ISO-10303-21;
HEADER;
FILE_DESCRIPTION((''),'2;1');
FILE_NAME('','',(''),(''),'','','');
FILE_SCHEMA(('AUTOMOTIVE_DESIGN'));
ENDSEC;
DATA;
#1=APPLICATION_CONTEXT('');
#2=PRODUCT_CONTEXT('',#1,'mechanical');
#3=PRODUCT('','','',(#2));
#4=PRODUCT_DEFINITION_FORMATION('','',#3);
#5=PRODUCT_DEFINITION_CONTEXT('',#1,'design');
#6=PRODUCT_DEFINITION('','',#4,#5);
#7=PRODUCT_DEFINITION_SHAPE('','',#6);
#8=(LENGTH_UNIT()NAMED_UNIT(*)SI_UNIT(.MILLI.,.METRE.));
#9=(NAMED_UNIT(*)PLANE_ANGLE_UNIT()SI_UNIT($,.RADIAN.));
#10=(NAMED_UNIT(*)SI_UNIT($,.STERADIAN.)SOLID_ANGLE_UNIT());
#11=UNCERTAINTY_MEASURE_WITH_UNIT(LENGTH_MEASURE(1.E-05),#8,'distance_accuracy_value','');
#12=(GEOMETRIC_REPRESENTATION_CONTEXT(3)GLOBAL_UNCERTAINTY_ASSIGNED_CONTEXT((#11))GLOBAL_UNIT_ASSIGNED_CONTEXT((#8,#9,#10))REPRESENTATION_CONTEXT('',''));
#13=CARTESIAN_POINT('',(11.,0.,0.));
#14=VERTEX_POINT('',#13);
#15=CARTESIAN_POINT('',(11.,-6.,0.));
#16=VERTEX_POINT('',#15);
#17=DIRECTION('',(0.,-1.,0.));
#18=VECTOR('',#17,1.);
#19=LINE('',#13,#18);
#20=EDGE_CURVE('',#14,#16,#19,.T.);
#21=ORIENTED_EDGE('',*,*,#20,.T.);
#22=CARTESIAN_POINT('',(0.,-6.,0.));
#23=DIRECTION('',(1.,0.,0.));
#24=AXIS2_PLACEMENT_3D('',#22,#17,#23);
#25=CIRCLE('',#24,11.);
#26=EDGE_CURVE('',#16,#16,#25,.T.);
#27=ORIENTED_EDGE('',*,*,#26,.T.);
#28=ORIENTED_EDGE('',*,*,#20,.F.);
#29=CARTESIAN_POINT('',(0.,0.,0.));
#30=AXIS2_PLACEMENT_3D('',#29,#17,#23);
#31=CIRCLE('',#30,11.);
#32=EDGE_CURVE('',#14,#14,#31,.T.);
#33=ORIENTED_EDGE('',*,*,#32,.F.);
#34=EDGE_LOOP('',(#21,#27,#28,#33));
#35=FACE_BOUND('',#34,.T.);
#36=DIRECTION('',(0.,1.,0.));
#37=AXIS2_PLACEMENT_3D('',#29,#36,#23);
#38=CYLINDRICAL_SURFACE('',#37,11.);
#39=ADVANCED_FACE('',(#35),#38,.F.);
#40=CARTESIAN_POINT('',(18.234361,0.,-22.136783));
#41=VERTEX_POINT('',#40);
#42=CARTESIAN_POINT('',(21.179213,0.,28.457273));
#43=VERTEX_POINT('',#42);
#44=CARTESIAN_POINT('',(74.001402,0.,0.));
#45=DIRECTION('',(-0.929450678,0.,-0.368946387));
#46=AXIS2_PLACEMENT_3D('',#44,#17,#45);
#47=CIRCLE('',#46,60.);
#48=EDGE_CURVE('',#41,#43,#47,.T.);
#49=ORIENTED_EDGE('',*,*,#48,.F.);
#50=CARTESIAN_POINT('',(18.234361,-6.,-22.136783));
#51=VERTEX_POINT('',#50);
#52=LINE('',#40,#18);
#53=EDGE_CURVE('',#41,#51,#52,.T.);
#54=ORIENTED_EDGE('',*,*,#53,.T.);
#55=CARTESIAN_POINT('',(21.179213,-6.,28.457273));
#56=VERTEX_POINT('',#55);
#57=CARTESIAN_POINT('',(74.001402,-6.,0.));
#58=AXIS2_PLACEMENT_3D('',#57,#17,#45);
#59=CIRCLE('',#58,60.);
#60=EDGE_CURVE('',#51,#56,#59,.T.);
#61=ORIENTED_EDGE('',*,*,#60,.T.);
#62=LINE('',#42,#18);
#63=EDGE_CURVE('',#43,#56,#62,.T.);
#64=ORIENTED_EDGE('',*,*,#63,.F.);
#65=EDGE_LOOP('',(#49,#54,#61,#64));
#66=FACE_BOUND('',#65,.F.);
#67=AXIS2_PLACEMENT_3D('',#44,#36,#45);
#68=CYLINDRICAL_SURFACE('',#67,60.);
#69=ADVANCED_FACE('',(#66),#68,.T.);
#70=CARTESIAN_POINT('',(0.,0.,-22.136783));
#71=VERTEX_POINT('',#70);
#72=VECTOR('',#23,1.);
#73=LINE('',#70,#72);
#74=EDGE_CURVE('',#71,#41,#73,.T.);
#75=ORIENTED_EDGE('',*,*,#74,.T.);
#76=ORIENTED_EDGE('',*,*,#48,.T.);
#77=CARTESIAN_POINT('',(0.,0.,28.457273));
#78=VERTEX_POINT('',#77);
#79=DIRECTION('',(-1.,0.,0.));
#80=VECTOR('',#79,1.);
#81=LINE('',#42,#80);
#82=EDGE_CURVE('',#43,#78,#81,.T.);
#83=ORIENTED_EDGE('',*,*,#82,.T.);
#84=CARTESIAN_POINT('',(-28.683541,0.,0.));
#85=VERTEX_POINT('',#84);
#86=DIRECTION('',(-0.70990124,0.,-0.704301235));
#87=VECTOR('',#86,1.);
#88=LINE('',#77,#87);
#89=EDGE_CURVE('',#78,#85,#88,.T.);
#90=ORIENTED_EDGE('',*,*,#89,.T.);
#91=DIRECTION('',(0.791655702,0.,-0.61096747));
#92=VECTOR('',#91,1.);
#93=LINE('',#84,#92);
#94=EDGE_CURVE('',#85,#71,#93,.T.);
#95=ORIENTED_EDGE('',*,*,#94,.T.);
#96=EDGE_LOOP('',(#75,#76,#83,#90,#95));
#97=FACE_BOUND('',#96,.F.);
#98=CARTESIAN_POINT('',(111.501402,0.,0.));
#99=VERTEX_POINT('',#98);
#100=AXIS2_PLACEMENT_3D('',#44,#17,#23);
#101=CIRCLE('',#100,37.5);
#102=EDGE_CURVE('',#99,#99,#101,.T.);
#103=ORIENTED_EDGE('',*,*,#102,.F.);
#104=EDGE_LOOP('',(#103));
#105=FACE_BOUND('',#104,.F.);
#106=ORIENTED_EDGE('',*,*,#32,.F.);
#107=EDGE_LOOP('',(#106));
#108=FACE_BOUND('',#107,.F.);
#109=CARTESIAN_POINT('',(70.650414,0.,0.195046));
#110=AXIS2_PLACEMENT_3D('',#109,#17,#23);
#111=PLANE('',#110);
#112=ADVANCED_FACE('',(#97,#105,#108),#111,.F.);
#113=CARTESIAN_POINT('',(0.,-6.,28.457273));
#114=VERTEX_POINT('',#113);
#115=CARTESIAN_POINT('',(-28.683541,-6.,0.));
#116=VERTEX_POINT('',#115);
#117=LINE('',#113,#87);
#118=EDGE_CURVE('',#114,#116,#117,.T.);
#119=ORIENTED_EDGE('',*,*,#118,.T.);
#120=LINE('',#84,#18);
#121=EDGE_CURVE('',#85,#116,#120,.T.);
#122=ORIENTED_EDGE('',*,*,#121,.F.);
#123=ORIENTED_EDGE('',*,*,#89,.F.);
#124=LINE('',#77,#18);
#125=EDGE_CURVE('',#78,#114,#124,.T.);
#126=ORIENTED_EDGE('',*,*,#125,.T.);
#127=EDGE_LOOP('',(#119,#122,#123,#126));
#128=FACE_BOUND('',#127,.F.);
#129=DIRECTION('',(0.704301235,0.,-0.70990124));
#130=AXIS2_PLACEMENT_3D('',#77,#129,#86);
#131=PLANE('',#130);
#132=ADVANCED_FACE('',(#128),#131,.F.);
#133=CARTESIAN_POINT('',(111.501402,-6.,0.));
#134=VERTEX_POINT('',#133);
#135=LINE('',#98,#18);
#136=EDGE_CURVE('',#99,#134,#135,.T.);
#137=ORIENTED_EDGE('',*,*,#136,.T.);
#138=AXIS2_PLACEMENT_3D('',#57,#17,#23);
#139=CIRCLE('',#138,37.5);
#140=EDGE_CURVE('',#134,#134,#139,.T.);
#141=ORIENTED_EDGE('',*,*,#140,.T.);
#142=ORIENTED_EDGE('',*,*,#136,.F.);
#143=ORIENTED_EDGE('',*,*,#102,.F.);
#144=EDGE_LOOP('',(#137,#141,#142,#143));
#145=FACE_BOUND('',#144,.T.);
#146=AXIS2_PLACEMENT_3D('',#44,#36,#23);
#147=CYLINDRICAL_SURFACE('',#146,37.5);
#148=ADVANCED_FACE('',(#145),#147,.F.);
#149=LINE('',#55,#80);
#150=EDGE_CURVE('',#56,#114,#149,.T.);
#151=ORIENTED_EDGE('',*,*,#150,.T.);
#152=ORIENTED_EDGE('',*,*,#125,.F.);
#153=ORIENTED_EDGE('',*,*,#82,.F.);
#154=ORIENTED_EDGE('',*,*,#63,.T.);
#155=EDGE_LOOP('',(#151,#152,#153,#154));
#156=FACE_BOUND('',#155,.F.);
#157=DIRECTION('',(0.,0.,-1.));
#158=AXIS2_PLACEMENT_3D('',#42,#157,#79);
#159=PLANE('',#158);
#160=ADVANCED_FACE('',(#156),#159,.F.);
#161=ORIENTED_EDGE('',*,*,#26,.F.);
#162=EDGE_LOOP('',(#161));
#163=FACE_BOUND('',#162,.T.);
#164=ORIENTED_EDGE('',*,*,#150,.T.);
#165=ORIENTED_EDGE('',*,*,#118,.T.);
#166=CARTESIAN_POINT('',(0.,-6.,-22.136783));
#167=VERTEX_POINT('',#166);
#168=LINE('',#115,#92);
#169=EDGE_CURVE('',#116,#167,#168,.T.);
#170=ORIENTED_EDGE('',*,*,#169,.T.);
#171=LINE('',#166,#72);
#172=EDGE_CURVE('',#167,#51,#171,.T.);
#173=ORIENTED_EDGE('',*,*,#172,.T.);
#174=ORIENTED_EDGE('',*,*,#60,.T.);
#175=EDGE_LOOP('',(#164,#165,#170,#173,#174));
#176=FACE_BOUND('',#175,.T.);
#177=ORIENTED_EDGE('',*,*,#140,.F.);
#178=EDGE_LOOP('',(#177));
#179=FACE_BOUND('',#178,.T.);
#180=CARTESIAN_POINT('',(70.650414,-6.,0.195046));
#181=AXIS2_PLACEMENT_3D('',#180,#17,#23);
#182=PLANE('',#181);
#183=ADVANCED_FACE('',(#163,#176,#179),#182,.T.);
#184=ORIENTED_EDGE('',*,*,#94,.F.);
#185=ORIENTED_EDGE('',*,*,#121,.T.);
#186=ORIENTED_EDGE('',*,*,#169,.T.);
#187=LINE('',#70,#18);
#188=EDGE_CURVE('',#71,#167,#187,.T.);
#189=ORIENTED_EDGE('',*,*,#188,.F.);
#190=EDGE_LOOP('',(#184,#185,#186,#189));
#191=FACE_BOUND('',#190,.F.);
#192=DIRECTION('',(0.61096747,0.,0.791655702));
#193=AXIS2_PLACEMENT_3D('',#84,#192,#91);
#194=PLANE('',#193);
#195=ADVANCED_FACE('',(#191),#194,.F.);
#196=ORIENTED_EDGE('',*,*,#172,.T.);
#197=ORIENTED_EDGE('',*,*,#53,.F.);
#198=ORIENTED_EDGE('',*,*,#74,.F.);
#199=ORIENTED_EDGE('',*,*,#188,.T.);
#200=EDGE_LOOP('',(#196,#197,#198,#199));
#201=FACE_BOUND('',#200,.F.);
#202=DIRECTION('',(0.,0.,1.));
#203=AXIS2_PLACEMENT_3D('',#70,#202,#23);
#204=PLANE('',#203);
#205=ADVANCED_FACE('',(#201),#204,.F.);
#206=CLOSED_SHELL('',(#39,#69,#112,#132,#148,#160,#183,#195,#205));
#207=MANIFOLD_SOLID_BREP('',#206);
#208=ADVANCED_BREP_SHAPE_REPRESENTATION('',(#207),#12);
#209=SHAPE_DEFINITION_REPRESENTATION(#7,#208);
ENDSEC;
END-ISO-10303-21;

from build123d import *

# Parameters (mm, degrees)
F0_R     = 37.5
F0_R_2   = 11
F1_DEPTH = 6


# Not quite as in the source:
# - a feature names something its author has since deleted; it is built from what else it names


with BuildPart() as f1:
    # F0 (on Front) → F1 (new body)
    with BuildSketch(Plane.XZ):
        with BuildLine():
            ThreePointArc((18.2343609636, -22.1367832273), (85.2703314711, -58.932259595), (134.0014016628, 0))
            ThreePointArc((134.0014016628, 0), (88.6756766088, 58.1778794286), (21.1792131691, 28.4572732836))
            ThreePointArc((21.1792131691, 28.4572732836), (14.1027805373, 3.4864290135), (18.2343609636, -22.1367832273))
        make_face()
        with Locations((74.0014016628, 0)):
            Circle(F0_R, mode=Mode.SUBTRACT)
        with BuildLine():
            ThreePointArc((18.2343609636, -22.1367832273), (14.1027805373, 3.4864290135), (21.1792131691, 28.4572732836))
            Line((21.1792131691, 28.4572732836), (0, 28.4572732836))
            Line((0, 28.4572732836), (-28.6835413426, 0))
            Line((-28.6835413426, 0), (0, -22.1367832273))
            Line((0, -22.1367832273), (18.2343609636, -22.1367832273))
        make_face()
        Circle(F0_R_2, mode=Mode.SUBTRACT)
    extrude(amount=F1_DEPTH)


solid = f1.part
